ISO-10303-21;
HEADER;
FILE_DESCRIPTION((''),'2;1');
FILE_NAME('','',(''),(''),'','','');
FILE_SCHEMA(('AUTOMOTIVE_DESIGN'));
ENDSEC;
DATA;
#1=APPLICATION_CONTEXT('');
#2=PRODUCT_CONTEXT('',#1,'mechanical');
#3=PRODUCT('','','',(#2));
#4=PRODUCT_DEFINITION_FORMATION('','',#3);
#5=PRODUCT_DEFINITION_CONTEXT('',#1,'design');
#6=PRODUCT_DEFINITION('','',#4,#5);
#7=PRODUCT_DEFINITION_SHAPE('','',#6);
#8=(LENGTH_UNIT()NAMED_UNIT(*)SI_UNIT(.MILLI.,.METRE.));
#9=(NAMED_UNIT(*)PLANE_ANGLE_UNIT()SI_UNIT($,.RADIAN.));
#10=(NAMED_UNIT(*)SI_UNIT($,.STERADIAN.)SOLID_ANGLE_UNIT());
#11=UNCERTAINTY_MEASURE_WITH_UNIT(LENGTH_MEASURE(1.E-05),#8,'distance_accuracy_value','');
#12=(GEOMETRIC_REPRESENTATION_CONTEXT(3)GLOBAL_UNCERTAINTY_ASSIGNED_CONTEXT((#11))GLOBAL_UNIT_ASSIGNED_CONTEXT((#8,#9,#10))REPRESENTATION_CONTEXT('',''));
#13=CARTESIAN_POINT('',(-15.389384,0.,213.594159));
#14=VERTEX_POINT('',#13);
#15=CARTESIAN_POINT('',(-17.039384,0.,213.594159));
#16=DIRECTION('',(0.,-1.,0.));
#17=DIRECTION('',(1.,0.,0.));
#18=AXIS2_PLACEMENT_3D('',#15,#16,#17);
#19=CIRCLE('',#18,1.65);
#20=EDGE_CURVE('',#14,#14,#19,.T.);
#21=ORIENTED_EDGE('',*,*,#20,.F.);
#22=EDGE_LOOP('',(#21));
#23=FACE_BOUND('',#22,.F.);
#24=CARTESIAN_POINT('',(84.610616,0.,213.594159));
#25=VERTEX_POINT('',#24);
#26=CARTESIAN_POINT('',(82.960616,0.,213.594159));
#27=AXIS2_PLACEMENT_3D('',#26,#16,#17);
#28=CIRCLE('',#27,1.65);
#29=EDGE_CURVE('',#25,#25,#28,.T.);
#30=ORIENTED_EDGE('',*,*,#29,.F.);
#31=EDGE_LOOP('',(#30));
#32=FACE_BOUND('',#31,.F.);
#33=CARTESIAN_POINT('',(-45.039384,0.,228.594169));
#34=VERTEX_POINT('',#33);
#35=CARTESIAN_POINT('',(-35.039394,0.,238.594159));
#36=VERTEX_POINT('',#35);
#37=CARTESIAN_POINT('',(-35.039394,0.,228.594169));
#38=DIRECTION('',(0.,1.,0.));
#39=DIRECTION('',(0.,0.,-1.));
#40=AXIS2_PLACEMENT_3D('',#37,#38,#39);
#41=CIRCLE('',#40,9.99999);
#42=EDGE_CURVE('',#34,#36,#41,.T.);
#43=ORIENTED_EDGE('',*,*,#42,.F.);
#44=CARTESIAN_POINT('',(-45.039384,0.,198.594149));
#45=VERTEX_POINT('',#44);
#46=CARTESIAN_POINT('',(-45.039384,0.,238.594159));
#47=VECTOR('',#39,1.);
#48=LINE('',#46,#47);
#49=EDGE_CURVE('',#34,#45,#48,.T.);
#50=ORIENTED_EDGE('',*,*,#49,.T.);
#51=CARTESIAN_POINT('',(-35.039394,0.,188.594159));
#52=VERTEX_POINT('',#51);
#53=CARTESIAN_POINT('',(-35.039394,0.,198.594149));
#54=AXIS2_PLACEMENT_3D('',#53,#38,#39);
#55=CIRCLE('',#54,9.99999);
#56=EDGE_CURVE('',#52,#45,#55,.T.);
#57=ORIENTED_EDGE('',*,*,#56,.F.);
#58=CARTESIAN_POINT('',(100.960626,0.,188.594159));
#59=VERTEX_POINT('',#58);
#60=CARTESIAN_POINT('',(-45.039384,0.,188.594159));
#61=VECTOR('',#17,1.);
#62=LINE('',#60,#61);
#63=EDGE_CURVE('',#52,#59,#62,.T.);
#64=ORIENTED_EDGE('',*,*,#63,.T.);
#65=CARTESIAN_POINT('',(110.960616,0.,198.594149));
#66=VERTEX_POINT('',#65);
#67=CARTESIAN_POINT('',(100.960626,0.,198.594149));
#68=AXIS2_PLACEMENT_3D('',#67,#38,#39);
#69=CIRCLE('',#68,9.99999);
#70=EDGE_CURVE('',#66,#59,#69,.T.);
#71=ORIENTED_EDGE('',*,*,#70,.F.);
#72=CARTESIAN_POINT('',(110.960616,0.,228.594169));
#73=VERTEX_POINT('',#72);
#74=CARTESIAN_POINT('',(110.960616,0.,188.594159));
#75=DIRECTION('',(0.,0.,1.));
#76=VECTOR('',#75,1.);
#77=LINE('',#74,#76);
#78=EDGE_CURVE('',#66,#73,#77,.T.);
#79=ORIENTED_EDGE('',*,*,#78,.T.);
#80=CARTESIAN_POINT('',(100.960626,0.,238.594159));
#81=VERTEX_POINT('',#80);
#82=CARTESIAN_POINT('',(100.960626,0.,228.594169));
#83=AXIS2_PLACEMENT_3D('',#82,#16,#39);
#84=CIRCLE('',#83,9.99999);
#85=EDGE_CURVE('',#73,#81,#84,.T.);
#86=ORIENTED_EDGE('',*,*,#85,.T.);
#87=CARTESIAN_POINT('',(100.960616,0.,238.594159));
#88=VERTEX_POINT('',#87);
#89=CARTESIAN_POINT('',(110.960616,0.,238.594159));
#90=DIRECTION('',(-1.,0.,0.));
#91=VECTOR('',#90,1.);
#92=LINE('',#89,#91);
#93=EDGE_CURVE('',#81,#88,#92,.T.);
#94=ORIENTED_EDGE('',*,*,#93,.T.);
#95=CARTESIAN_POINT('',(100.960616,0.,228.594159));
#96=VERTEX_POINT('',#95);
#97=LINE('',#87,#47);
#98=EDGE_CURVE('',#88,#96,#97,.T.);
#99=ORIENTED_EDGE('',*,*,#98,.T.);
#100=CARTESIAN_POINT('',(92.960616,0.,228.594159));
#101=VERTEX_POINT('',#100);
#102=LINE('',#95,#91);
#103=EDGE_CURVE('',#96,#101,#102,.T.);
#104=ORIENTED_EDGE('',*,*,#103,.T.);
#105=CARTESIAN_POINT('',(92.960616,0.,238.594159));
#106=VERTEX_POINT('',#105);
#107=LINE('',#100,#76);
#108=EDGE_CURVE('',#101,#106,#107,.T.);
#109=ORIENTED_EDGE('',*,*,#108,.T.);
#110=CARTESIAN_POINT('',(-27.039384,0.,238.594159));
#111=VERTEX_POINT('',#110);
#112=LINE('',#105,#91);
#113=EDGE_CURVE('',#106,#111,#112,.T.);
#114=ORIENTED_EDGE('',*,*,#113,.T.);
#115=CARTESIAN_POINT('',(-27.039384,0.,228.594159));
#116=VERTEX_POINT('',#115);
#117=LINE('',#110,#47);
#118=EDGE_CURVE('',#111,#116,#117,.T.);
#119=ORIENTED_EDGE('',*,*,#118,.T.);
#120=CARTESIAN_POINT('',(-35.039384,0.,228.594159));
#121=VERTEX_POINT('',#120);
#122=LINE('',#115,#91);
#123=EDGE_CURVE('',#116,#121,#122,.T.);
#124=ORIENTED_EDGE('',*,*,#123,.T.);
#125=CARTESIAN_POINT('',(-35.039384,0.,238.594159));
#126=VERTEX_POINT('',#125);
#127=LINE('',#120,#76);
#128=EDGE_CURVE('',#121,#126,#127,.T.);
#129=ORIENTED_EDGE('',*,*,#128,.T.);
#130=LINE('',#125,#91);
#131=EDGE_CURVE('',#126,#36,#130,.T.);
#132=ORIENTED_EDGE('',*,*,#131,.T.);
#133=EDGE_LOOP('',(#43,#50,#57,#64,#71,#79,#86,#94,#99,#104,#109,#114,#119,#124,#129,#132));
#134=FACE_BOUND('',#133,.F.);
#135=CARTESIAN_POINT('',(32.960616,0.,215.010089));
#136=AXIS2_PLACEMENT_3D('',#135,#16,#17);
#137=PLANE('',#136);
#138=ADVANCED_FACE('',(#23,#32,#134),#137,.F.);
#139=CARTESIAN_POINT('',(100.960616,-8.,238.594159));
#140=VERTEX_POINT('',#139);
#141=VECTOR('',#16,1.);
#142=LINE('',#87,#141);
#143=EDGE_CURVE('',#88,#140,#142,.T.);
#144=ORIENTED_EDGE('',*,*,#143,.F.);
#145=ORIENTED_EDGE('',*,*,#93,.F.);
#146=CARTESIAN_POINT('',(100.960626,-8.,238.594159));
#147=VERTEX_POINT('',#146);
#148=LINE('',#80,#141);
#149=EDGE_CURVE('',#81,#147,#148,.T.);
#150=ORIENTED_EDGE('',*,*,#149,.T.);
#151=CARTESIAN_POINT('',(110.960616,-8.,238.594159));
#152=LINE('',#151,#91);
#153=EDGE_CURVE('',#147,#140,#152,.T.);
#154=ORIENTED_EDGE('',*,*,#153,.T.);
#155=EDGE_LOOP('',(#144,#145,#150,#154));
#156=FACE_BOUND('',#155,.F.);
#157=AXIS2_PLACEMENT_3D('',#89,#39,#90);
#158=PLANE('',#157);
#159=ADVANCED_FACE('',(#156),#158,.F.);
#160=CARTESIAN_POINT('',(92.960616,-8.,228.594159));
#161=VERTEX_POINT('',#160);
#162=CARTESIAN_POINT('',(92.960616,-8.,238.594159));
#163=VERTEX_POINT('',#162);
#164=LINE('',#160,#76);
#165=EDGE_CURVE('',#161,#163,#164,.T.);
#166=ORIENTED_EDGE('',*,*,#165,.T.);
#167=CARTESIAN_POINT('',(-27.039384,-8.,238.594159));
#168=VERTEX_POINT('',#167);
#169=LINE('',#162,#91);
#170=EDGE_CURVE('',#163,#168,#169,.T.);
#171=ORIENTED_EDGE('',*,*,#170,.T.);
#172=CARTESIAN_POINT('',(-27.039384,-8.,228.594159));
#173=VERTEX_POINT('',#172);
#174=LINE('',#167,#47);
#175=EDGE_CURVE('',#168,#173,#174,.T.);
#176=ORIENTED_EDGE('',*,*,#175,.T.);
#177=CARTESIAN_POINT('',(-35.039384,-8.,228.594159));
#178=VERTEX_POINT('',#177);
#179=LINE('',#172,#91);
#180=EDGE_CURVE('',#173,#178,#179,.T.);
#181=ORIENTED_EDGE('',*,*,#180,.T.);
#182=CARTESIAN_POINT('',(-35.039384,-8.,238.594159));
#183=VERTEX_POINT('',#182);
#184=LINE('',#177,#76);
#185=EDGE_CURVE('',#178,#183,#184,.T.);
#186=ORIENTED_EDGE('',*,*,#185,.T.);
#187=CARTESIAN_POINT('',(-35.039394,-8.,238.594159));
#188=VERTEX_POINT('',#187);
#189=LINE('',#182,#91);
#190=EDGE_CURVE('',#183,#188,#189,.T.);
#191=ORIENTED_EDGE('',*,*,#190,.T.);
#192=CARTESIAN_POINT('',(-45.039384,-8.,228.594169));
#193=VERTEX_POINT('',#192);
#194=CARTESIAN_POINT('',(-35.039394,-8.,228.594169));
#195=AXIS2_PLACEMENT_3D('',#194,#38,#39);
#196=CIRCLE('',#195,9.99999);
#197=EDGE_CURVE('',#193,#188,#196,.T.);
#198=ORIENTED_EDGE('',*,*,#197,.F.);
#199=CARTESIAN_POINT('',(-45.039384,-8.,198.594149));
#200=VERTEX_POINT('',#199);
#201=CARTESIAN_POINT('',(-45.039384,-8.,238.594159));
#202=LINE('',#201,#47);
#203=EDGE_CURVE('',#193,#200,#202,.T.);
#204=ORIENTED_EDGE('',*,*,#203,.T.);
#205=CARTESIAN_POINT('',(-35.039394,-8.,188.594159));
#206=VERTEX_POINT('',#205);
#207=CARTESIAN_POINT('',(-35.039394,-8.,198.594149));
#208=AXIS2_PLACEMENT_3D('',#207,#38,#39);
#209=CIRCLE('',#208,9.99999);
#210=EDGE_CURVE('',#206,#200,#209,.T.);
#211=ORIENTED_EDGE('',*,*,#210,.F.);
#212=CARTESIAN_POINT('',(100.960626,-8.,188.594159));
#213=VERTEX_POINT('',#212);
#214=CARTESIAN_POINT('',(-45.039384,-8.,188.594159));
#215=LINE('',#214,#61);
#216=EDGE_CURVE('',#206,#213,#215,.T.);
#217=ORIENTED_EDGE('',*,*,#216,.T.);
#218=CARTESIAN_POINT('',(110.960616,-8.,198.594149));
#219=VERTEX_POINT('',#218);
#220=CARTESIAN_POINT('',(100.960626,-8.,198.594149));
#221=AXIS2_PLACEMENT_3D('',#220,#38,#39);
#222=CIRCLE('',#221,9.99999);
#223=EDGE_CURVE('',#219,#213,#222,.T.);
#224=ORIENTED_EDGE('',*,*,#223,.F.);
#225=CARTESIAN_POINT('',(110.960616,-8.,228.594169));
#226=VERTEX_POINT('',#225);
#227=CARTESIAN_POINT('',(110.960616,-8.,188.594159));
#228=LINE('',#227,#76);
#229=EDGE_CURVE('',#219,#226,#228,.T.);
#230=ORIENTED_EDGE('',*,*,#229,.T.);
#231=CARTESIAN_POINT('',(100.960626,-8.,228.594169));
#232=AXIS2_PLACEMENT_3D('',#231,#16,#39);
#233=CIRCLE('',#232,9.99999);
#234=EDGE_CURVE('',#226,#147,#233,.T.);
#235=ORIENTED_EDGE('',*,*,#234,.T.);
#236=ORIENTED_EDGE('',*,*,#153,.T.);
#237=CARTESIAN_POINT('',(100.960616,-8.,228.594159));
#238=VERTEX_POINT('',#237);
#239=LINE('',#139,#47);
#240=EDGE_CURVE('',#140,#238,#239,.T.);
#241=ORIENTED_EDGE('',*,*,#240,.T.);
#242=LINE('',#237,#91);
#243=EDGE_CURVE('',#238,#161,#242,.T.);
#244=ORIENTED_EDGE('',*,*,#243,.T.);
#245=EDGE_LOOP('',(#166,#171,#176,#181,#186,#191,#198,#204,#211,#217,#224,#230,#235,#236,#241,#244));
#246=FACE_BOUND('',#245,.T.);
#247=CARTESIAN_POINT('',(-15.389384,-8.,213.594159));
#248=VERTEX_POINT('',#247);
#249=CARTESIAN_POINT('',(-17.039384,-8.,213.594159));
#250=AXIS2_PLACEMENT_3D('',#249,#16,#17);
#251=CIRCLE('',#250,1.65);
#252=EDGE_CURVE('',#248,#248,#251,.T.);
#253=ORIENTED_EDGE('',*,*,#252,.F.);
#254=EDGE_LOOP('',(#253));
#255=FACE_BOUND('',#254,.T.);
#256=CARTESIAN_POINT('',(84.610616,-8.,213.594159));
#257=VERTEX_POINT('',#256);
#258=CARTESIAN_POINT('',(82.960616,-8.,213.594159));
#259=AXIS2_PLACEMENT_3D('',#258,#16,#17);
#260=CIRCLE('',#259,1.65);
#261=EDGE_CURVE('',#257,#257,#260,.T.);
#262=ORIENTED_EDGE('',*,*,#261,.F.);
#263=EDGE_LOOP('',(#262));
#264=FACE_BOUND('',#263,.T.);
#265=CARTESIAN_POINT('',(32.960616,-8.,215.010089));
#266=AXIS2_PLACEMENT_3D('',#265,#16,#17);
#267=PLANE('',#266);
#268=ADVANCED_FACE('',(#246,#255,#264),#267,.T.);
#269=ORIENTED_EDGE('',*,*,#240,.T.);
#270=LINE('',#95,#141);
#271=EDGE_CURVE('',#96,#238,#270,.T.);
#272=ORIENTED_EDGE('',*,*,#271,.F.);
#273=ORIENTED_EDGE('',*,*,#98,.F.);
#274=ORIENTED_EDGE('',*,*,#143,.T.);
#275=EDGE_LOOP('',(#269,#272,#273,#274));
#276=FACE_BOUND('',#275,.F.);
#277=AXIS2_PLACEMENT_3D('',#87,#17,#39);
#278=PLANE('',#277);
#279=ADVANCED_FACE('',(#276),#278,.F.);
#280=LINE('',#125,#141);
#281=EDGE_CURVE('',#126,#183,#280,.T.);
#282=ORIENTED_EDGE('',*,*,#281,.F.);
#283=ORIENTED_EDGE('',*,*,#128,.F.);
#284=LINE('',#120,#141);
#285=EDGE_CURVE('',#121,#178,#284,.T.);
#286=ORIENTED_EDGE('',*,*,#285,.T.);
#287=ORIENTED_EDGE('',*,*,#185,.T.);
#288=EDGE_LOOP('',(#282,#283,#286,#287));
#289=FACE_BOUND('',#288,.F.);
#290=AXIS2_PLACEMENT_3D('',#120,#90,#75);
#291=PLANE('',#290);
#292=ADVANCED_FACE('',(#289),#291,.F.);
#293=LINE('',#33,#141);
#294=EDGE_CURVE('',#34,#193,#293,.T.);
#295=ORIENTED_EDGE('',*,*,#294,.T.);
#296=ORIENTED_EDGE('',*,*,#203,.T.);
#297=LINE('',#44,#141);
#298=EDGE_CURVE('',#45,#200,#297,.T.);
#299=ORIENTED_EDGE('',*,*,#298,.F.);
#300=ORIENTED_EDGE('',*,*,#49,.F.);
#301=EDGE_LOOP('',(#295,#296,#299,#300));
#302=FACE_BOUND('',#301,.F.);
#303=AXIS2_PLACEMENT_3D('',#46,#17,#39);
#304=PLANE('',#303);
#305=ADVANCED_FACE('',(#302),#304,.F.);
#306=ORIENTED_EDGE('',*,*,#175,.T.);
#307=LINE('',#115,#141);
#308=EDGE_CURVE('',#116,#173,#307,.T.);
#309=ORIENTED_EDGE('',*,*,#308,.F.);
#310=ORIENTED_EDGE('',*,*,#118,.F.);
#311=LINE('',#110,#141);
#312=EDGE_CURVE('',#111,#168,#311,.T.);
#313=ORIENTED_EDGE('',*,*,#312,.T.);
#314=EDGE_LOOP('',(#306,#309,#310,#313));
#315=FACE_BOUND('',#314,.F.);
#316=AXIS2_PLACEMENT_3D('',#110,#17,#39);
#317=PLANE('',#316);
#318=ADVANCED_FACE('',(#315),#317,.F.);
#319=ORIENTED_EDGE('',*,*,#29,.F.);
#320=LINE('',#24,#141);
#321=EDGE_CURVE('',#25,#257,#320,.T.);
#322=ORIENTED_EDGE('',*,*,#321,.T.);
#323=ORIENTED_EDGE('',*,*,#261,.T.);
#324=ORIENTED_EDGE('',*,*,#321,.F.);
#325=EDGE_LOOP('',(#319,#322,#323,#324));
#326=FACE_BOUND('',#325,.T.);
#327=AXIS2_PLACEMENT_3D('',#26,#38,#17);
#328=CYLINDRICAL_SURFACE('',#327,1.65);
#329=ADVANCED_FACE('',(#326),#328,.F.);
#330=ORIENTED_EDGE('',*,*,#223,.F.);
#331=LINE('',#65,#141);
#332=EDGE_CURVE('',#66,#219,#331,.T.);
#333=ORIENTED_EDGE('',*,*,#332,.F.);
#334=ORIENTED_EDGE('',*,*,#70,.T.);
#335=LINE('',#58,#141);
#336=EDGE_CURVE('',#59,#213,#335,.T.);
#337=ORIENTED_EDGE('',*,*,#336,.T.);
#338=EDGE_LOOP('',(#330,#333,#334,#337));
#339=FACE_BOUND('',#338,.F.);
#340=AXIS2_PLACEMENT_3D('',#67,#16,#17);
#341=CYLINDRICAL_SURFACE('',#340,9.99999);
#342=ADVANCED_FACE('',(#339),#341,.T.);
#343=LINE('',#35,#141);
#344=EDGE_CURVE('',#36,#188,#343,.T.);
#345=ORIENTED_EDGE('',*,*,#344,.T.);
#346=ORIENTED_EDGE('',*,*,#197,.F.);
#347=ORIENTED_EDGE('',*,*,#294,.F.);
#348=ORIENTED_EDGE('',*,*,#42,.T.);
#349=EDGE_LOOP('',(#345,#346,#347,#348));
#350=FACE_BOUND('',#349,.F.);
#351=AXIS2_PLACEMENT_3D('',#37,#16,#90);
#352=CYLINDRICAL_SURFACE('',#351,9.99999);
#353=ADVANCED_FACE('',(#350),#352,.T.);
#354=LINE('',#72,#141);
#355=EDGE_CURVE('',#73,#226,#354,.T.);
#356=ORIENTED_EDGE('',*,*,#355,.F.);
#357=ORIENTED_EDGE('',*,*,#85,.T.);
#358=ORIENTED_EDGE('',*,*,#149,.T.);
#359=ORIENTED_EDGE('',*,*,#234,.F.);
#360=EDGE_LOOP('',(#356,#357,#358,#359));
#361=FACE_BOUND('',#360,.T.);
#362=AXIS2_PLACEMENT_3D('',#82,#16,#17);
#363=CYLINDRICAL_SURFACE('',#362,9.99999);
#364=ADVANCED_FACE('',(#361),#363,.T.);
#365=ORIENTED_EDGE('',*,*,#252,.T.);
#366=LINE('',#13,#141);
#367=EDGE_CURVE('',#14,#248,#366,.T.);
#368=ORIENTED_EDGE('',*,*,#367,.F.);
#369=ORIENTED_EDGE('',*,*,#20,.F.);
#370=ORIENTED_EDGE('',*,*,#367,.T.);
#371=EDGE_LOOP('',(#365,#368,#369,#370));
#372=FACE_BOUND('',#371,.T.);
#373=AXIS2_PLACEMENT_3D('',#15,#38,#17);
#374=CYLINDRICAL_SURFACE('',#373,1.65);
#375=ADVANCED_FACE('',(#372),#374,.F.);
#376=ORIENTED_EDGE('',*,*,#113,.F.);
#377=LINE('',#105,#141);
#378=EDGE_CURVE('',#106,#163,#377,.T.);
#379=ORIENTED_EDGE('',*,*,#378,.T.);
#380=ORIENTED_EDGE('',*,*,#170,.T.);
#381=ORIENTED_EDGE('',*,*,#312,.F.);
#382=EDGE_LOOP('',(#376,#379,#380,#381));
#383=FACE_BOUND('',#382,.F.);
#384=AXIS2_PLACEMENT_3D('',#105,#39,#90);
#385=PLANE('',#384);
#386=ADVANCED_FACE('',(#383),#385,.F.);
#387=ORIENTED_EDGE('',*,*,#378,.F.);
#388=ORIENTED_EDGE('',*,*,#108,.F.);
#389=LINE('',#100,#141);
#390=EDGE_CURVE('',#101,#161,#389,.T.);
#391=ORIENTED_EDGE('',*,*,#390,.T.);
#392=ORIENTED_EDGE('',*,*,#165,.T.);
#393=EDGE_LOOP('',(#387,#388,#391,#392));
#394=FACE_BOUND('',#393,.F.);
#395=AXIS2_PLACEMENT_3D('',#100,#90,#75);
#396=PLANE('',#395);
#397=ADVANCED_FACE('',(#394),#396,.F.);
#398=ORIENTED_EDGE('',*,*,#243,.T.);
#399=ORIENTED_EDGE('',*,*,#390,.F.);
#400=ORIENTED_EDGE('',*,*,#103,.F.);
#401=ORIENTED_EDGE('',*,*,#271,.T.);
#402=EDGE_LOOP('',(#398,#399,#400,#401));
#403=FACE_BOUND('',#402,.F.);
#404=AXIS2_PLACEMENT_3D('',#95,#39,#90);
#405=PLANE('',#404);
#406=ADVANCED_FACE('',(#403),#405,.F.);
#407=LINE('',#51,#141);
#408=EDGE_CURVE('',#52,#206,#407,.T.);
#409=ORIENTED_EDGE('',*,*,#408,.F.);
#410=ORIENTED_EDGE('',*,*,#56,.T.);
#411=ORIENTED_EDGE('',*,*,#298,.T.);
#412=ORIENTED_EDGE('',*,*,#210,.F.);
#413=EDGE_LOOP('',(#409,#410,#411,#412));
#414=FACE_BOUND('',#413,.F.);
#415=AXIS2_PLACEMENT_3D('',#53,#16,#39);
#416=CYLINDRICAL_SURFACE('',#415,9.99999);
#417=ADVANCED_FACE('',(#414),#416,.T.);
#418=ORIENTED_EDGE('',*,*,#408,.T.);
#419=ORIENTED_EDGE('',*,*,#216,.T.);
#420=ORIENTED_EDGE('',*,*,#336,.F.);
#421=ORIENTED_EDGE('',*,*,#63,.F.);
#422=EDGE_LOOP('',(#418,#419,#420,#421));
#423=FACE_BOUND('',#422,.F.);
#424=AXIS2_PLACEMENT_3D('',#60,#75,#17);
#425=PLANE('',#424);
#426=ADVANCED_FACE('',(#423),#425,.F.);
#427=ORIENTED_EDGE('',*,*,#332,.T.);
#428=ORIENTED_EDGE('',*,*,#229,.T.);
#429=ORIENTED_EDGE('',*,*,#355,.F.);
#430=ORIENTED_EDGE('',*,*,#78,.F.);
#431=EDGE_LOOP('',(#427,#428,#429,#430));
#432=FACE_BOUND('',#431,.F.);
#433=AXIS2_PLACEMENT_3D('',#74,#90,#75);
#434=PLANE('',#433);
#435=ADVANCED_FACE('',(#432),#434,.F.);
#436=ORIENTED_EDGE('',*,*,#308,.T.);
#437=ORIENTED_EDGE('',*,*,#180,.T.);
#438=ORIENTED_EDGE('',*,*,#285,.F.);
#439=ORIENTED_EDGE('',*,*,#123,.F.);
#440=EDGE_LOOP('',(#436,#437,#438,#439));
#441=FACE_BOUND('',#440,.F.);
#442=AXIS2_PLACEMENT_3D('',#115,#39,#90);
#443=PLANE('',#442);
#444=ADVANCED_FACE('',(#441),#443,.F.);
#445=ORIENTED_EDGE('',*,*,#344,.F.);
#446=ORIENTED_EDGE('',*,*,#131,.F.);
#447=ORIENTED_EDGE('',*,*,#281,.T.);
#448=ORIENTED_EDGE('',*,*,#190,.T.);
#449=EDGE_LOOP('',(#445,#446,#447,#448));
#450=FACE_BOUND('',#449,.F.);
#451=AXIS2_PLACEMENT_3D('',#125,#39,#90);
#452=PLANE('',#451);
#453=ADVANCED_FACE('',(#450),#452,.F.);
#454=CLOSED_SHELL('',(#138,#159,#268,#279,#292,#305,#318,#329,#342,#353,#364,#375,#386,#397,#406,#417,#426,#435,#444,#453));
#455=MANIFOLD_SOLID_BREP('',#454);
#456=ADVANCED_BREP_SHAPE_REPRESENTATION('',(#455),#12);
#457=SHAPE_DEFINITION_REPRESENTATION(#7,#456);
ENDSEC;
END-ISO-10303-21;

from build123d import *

# Parameters (mm, degrees)
F0_R     = 1.65
F1_DEPTH = 8
F2_R     = 9.99999


# Not quite as in the source:
# - a fillet or chamfer is up to 0.001 mm smaller than in the source, because OpenCascade refuses the exact size


with BuildPart() as f1:
    # F0 (on Front) → F1 (new body)
    with BuildSketch(Plane.XZ):
        Polygon((-27.0393844694, 188.5941594839), (92.9606155306, 188.5941594839), (110.9606155306, 188.5941594839), (110.9606155306, 238.5941594839), (100.9606155306, 238.5941594839), (100.9606155306, 228.5941594839), (92.9606155306, 228.5941594839), (92.9606155306, 238.5941594839), (-27.0393844694, 238.5941594839), (-27.0393844694, 228.5941594839), (-35.0393844694, 228.5941594839), (-35.0393844694, 238.5941594839), (-45.0393844694, 238.5941594839), (-45.0393844694, 188.5941594839), align=None)
        with Locations((-17.0393844694, 213.5941594839)):
            Circle(F0_R, mode=Mode.SUBTRACT)
        with Locations((82.9606155306, 213.5941594839)):
            Circle(F0_R, mode=Mode.SUBTRACT)
    extrude(amount=F1_DEPTH)

    # F2 (radius 10 in the source; OpenCascade refuses exactly that, so slightly less here)
    f2_edges = [f1.edges().sort_by_distance(p)[0] for p in [
        (-45.039384, -4, 238.594159),
        (-45.039384, -4, 188.594159),
        (110.960616, -4, 188.594159),
        (110.960616, -4, 238.594159),
    ]]
    fillet(f2_edges, radius=F2_R)


solid = f1.part
